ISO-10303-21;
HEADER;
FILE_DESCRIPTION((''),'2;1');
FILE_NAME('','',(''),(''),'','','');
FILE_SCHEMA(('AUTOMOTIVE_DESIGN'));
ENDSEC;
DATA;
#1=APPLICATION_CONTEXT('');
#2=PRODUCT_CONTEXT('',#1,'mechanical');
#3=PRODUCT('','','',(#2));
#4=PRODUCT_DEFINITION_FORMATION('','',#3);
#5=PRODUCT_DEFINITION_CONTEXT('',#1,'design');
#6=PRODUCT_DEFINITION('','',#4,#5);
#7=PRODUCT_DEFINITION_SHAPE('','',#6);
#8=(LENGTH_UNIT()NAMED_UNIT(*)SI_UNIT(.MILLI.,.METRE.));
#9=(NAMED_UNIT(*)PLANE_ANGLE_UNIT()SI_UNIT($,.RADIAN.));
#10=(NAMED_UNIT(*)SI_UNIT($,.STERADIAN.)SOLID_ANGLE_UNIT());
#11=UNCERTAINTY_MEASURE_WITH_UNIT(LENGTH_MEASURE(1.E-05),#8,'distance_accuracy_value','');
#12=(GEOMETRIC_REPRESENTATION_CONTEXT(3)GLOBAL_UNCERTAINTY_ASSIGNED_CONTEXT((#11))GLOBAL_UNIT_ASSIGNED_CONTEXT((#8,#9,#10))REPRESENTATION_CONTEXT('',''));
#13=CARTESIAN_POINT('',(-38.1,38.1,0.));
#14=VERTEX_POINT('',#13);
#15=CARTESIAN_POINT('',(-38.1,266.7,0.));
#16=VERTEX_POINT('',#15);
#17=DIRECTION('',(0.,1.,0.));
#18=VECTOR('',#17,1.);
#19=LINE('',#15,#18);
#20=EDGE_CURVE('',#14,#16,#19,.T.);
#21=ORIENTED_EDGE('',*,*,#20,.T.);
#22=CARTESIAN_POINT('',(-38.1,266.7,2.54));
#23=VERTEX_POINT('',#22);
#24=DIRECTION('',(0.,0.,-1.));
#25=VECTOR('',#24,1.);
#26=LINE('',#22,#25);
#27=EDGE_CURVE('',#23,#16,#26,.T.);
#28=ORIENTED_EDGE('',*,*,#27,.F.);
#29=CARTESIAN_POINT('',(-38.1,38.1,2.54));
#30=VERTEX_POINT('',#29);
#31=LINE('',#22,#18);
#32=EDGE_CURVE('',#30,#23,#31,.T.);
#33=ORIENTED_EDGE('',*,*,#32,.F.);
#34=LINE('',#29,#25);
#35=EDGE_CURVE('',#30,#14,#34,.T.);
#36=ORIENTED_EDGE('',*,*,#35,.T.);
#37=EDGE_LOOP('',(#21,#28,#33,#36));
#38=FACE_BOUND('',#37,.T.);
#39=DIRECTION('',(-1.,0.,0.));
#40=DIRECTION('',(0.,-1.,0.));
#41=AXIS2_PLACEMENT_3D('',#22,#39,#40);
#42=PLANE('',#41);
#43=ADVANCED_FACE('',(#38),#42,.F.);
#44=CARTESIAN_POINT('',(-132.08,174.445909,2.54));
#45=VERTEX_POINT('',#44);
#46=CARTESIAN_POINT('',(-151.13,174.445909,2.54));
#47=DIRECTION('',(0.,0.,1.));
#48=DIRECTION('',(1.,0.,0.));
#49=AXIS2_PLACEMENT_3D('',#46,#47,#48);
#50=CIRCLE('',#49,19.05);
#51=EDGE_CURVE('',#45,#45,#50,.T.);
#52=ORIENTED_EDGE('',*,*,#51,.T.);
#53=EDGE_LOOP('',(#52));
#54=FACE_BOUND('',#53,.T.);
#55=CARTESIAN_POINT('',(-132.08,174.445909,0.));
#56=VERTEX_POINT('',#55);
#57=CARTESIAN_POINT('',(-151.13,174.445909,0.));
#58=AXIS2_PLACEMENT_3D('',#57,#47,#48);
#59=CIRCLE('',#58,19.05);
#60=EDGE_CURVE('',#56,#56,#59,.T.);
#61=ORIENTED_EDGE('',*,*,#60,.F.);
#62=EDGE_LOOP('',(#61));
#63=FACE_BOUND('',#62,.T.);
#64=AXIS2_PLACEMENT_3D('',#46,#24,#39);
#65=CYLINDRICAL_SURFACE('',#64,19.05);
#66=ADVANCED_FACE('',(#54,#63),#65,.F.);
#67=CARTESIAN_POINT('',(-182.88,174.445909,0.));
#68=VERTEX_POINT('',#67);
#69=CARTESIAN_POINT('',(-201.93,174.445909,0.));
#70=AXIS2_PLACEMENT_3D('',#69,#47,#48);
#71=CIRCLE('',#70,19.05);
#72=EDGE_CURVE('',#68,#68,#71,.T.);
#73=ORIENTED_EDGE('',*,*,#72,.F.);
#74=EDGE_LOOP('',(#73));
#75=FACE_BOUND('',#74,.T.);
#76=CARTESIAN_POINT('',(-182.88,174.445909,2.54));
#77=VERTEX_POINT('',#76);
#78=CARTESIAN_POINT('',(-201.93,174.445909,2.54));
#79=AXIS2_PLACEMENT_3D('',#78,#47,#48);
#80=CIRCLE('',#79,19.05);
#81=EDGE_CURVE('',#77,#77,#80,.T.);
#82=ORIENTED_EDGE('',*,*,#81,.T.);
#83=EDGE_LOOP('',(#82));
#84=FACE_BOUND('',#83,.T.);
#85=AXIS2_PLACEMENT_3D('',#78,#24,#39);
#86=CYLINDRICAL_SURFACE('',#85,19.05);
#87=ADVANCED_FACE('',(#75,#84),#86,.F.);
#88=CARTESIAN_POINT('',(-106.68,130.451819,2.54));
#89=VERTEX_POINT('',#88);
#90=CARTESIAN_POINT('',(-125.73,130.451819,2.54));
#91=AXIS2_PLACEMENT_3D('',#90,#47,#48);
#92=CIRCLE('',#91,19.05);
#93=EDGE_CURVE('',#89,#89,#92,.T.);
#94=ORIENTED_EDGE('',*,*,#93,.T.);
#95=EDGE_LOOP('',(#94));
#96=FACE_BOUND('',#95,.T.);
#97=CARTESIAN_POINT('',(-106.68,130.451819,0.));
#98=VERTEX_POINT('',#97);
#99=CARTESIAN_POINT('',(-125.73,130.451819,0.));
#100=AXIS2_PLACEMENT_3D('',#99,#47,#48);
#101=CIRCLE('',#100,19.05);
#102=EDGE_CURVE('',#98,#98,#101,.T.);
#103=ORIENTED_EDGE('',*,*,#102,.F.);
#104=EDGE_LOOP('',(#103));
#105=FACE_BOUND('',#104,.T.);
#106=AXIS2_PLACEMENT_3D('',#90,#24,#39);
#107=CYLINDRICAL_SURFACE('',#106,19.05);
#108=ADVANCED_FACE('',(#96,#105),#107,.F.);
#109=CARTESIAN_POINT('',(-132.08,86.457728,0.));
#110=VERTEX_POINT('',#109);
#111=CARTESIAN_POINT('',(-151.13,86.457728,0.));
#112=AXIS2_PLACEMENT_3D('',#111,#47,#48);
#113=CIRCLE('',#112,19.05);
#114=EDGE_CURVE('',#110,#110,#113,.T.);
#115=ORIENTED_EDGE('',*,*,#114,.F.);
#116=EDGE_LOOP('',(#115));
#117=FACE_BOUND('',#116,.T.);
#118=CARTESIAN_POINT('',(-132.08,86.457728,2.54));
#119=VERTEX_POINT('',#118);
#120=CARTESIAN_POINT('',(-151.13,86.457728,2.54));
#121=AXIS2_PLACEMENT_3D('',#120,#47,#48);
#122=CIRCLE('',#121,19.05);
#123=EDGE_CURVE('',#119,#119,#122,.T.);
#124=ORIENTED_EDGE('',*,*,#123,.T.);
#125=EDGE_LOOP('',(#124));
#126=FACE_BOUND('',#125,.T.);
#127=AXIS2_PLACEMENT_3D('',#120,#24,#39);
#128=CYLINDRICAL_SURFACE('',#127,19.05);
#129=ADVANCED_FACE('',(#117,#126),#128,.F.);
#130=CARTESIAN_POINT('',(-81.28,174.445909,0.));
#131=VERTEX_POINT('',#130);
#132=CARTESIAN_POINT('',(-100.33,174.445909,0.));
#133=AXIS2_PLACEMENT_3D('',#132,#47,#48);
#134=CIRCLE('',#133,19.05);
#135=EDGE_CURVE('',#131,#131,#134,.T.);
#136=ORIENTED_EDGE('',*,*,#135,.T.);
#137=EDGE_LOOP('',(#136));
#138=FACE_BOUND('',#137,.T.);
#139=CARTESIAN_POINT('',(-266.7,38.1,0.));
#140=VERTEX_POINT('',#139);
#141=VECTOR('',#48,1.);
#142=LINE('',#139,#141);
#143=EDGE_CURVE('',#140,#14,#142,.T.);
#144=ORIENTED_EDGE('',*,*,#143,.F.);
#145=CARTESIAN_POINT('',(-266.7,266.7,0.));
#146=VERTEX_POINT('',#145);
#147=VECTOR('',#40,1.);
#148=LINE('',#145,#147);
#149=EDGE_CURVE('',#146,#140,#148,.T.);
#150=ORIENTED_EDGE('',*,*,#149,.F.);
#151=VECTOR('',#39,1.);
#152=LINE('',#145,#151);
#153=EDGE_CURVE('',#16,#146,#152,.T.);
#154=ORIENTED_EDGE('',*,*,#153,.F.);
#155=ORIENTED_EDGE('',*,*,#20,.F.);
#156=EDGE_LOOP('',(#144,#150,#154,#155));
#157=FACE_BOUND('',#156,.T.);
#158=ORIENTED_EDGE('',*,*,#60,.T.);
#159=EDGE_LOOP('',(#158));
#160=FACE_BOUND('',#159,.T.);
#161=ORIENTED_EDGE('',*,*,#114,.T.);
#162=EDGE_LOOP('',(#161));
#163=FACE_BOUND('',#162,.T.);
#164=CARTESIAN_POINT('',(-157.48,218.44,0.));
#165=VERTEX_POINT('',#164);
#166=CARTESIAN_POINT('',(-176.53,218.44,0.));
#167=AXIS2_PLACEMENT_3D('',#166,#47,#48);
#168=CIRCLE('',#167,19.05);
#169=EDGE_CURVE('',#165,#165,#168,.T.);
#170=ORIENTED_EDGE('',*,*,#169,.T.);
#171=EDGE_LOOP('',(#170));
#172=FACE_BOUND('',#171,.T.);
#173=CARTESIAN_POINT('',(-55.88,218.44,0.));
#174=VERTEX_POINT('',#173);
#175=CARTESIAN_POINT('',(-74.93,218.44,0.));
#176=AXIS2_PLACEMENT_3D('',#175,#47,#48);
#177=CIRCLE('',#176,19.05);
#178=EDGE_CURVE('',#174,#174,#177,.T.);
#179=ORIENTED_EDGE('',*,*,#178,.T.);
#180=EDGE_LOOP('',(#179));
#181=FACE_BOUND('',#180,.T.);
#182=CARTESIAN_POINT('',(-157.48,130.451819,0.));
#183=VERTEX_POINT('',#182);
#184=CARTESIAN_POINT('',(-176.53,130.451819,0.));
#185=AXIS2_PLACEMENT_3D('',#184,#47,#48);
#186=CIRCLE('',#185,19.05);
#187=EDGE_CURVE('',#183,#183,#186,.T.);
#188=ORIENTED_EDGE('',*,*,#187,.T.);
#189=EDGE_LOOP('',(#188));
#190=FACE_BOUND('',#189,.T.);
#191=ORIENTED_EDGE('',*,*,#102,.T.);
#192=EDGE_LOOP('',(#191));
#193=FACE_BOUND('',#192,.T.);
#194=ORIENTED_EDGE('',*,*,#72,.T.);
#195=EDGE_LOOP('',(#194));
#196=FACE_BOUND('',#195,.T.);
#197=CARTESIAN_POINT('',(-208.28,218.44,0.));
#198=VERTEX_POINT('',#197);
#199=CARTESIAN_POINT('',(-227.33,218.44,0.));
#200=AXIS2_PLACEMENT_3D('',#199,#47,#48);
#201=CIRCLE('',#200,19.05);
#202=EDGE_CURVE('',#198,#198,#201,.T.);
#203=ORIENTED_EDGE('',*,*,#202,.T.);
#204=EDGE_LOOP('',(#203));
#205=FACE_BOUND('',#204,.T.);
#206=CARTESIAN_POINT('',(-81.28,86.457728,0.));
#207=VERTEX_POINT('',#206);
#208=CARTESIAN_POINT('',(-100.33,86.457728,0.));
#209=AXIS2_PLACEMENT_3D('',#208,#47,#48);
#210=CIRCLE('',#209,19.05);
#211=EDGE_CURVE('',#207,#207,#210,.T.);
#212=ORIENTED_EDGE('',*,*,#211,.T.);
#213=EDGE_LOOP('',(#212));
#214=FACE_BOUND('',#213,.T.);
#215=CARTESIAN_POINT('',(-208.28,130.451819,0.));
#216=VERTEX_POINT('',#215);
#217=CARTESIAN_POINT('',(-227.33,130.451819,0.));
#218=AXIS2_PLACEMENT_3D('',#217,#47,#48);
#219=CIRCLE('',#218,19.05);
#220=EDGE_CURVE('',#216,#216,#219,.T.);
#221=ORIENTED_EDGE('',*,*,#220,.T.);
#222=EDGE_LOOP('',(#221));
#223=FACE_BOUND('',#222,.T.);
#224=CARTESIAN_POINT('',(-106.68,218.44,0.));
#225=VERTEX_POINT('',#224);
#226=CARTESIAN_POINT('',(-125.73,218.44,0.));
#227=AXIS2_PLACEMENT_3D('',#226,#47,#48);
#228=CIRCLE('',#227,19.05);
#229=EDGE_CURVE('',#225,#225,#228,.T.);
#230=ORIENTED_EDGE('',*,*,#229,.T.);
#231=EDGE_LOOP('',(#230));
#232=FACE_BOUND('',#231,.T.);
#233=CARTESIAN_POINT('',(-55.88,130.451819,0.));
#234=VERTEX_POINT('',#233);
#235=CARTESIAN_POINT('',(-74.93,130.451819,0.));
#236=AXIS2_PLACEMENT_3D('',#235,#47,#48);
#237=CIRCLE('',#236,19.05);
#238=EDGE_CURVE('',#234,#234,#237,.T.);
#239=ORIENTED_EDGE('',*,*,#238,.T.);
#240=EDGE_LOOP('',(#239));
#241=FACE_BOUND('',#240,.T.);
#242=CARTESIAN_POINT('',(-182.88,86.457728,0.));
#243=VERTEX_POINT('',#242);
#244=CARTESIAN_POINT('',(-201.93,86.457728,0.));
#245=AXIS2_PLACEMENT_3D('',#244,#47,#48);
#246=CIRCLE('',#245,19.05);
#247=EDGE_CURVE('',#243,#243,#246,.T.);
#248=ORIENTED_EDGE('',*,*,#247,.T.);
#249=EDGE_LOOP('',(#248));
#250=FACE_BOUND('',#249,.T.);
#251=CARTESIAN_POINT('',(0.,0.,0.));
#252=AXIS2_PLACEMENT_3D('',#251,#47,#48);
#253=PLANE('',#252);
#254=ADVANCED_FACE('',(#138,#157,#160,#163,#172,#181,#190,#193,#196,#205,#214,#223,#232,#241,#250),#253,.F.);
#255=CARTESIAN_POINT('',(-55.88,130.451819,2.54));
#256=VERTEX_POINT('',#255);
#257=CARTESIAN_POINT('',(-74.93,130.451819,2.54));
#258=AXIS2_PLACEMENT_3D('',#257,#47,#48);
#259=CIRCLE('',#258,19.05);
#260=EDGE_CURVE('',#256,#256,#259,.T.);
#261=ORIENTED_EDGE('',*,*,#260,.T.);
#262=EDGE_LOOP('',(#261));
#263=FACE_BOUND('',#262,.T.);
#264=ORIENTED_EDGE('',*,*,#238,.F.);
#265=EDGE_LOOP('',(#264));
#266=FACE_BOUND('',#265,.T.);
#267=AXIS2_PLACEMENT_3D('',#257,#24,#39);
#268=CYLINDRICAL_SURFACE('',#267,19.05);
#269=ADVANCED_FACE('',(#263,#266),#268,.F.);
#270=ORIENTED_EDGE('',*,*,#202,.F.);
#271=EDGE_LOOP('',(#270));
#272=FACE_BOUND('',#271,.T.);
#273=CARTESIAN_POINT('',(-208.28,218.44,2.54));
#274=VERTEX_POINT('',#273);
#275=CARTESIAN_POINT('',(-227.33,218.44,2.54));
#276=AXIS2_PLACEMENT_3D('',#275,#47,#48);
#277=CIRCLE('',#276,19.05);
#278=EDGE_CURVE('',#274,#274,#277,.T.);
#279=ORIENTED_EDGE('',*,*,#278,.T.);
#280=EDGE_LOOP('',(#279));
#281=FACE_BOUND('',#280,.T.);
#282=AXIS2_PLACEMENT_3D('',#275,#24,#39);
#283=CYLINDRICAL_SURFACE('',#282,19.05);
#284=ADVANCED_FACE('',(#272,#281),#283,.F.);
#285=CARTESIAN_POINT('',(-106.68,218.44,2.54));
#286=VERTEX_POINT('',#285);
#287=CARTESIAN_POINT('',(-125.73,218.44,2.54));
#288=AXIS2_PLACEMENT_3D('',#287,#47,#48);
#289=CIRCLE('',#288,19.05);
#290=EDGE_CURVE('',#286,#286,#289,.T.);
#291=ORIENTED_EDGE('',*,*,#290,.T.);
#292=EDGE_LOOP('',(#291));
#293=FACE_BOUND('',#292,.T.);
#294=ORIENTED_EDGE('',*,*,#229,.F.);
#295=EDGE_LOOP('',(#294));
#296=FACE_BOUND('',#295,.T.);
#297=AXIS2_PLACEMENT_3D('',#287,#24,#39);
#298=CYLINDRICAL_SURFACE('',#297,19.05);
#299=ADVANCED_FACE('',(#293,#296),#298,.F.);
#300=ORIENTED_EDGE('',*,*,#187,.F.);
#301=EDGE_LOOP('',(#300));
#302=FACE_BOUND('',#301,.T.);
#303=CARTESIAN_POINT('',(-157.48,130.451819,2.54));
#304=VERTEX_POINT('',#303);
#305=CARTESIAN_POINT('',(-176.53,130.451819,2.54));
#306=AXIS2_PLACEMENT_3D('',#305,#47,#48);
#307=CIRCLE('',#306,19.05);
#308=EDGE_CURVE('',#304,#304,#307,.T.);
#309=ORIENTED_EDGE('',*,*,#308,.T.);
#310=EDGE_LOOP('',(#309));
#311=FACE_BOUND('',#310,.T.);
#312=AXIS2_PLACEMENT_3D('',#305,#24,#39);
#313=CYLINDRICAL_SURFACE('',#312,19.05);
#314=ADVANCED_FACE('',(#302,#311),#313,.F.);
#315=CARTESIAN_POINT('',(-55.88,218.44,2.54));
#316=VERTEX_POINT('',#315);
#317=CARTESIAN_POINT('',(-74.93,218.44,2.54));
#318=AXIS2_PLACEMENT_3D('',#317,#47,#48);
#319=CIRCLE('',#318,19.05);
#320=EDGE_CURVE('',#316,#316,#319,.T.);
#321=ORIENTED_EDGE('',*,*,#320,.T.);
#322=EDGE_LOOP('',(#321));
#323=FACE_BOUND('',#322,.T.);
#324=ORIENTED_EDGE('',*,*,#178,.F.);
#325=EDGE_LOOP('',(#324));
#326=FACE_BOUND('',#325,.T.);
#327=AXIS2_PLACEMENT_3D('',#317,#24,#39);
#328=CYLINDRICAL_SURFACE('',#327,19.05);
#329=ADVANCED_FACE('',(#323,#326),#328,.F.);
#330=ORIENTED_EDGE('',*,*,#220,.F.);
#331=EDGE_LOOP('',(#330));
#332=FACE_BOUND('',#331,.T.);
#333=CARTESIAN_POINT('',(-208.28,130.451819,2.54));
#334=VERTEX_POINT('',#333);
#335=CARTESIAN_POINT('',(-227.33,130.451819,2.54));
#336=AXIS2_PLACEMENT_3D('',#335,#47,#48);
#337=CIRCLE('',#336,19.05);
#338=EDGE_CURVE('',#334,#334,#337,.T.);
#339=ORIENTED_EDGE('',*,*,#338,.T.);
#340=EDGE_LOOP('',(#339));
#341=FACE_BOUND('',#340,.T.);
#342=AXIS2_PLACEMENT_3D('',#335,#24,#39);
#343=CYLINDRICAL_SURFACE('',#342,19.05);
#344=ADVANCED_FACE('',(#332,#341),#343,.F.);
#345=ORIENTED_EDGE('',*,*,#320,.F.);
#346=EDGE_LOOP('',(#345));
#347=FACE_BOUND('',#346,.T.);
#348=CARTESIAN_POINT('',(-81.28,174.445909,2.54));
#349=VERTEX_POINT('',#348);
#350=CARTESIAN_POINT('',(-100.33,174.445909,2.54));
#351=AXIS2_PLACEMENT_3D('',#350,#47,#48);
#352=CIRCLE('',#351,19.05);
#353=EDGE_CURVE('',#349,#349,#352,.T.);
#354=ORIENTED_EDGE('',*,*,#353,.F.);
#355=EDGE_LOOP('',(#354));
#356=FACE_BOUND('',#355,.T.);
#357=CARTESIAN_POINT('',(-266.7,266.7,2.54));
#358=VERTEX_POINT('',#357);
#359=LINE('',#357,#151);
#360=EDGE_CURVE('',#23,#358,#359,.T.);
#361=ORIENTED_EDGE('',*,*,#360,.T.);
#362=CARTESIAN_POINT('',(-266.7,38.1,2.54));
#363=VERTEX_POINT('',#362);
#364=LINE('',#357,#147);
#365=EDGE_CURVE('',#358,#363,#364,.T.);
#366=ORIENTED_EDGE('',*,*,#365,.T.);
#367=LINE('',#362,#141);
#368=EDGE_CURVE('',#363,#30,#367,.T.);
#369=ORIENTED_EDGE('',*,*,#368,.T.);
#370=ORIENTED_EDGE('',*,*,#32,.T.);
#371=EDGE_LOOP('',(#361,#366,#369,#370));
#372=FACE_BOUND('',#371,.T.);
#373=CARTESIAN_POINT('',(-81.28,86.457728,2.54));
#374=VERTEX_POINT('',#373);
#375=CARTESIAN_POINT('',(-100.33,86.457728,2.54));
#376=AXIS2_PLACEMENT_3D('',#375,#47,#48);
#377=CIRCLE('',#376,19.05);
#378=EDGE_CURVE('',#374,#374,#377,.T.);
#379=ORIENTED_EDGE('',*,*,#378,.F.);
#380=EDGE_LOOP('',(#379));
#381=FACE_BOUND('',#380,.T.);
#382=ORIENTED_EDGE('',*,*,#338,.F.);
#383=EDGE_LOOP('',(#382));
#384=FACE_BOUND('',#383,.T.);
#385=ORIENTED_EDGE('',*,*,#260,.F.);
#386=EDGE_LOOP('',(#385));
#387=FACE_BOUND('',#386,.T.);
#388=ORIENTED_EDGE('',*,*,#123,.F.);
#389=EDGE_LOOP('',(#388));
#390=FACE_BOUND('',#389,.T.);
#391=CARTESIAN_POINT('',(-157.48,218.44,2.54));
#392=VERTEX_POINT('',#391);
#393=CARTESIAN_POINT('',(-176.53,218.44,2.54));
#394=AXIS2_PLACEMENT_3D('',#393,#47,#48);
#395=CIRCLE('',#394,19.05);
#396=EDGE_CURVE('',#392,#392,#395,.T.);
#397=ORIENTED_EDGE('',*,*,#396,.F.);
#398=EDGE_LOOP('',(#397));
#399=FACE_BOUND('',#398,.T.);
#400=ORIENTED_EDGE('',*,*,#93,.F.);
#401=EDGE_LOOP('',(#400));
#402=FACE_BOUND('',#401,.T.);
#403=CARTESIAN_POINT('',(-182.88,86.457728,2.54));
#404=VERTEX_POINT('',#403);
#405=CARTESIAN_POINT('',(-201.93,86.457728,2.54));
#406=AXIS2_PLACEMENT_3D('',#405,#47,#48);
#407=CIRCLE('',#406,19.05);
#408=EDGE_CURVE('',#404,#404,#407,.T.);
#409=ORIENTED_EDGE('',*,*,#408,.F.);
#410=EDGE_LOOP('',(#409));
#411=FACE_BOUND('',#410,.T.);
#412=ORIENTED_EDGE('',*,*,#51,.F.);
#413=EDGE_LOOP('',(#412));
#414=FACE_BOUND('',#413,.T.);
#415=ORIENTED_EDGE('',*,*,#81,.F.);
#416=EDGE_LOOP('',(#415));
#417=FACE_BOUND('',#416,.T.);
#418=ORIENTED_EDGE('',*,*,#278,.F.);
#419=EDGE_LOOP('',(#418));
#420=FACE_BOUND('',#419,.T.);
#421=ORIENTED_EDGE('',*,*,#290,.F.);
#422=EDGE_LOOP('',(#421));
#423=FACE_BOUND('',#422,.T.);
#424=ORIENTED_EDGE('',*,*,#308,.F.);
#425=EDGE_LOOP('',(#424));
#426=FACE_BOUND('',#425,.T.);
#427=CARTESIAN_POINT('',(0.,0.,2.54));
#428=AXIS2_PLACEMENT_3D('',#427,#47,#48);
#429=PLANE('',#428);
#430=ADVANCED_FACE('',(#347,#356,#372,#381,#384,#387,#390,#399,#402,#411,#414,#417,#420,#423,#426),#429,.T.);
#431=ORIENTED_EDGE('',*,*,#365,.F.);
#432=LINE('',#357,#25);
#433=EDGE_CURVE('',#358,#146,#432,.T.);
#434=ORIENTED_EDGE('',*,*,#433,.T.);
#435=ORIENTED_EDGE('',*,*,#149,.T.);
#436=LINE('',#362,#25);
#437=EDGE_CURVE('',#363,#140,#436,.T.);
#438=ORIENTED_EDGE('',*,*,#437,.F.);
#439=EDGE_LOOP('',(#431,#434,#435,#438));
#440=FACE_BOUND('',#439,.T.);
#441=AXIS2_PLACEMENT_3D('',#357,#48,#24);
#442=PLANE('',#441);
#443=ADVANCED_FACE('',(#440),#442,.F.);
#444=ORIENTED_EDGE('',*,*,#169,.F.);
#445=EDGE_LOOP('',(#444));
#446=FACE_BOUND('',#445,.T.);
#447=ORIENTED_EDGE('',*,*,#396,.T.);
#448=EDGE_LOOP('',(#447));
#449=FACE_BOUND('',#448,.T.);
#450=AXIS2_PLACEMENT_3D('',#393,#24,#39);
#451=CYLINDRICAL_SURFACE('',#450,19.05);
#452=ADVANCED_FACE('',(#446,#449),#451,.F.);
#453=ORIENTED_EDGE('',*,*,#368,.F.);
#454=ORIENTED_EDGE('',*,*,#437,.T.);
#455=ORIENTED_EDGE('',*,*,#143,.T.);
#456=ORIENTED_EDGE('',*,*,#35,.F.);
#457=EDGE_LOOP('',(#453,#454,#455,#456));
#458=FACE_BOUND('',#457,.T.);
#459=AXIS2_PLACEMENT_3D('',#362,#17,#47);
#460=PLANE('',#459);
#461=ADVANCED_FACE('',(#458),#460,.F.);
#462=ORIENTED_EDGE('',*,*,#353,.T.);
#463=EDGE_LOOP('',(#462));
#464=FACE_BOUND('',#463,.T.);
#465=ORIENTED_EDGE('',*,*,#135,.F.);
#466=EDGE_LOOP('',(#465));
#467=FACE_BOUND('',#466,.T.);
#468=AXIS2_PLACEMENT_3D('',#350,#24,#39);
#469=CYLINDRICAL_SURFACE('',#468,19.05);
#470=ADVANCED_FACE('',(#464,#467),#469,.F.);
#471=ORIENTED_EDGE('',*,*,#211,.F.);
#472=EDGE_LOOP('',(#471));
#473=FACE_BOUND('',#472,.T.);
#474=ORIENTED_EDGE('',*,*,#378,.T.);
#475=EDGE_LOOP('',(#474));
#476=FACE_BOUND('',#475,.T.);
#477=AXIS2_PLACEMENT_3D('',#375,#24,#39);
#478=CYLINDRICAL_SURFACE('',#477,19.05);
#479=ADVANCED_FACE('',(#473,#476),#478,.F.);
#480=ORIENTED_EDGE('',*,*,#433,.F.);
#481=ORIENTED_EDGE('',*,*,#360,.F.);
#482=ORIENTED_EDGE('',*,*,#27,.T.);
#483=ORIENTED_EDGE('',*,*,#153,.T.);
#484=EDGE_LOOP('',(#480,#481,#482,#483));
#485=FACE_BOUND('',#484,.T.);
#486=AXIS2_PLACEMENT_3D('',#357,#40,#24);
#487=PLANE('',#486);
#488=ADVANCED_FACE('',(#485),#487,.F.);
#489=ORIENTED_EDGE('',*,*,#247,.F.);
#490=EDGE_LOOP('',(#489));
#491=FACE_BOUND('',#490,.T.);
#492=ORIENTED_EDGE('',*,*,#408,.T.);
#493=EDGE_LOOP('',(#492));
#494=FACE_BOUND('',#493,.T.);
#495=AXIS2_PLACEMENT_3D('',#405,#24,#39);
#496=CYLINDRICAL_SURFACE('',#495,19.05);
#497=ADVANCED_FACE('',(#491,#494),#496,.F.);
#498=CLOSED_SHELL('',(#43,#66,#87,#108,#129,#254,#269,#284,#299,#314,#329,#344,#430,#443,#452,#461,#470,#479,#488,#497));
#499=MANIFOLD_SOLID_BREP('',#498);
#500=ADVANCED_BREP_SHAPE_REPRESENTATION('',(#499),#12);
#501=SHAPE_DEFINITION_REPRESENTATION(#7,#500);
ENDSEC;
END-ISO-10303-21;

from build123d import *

# Parameters (mm, degrees)
SKETCH1_W               = 228.6
SKETCH1_H               = 228.6
BOSS_EXTRUDE1_DEPTH     = 2.54
SKETCH4_R               = 19.05
CUT_EXTRUDE2_DEPTH      = 378.179309613
FILL_PATTERN2_OUTLINE_R = 19.05
FILL_PATTERN2_DEPTH     = 2.54


# Read off the part's stored shape, not the designer's step: Fill Pattern2
with BuildPart() as part:
    # Sketch1 → Boss-Extrude1 (new body)
    with BuildSketch(Plane.XY):
        with Locations((-152.4, 152.4)):
            Rectangle(SKETCH1_W, SKETCH1_H)
    extrude(amount=BOSS_EXTRUDE1_DEPTH)

    # Sketch4 → Cut-Extrude2 (cut, through all)
    with BuildSketch(Plane.XY):
        with Locations((-227.33, 218.44)):
            Circle(SKETCH4_R)
    extrude(amount=CUT_EXTRUDE2_DEPTH, mode=Mode.SUBTRACT)

    # Fill Pattern2 outline → Fill Pattern2 (cut)
    with BuildSketch(Plane.XY):
        with Locations((-74.93, 130.451818976)):
            Circle(FILL_PATTERN2_OUTLINE_R)
        with Locations((-201.93, 86.457728463)):
            Circle(FILL_PATTERN2_OUTLINE_R)
        with Locations((-176.53, 218.44)):
            Circle(FILL_PATTERN2_OUTLINE_R)
        with Locations((-201.93, 174.445909488)):
            Circle(FILL_PATTERN2_OUTLINE_R)
        with Locations((-227.33, 130.451818976)):
            Circle(FILL_PATTERN2_OUTLINE_R)
        with Locations((-125.73, 130.451818976)):
            Circle(FILL_PATTERN2_OUTLINE_R)
        with Locations((-100.33, 174.445909488)):
            Circle(FILL_PATTERN2_OUTLINE_R)
        with Locations((-74.93, 218.44)):
            Circle(FILL_PATTERN2_OUTLINE_R)
        with Locations((-100.33, 86.457728463)):
            Circle(FILL_PATTERN2_OUTLINE_R)
        with Locations((-176.53, 130.451818976)):
            Circle(FILL_PATTERN2_OUTLINE_R)
        with Locations((-151.13, 174.445909488)):
            Circle(FILL_PATTERN2_OUTLINE_R)
        with Locations((-125.73, 218.44)):
            Circle(FILL_PATTERN2_OUTLINE_R)
        with Locations((-151.13, 86.457728463)):
            Circle(FILL_PATTERN2_OUTLINE_R)
    extrude(amount=FILL_PATTERN2_DEPTH, mode=Mode.SUBTRACT)


solid = part.part
